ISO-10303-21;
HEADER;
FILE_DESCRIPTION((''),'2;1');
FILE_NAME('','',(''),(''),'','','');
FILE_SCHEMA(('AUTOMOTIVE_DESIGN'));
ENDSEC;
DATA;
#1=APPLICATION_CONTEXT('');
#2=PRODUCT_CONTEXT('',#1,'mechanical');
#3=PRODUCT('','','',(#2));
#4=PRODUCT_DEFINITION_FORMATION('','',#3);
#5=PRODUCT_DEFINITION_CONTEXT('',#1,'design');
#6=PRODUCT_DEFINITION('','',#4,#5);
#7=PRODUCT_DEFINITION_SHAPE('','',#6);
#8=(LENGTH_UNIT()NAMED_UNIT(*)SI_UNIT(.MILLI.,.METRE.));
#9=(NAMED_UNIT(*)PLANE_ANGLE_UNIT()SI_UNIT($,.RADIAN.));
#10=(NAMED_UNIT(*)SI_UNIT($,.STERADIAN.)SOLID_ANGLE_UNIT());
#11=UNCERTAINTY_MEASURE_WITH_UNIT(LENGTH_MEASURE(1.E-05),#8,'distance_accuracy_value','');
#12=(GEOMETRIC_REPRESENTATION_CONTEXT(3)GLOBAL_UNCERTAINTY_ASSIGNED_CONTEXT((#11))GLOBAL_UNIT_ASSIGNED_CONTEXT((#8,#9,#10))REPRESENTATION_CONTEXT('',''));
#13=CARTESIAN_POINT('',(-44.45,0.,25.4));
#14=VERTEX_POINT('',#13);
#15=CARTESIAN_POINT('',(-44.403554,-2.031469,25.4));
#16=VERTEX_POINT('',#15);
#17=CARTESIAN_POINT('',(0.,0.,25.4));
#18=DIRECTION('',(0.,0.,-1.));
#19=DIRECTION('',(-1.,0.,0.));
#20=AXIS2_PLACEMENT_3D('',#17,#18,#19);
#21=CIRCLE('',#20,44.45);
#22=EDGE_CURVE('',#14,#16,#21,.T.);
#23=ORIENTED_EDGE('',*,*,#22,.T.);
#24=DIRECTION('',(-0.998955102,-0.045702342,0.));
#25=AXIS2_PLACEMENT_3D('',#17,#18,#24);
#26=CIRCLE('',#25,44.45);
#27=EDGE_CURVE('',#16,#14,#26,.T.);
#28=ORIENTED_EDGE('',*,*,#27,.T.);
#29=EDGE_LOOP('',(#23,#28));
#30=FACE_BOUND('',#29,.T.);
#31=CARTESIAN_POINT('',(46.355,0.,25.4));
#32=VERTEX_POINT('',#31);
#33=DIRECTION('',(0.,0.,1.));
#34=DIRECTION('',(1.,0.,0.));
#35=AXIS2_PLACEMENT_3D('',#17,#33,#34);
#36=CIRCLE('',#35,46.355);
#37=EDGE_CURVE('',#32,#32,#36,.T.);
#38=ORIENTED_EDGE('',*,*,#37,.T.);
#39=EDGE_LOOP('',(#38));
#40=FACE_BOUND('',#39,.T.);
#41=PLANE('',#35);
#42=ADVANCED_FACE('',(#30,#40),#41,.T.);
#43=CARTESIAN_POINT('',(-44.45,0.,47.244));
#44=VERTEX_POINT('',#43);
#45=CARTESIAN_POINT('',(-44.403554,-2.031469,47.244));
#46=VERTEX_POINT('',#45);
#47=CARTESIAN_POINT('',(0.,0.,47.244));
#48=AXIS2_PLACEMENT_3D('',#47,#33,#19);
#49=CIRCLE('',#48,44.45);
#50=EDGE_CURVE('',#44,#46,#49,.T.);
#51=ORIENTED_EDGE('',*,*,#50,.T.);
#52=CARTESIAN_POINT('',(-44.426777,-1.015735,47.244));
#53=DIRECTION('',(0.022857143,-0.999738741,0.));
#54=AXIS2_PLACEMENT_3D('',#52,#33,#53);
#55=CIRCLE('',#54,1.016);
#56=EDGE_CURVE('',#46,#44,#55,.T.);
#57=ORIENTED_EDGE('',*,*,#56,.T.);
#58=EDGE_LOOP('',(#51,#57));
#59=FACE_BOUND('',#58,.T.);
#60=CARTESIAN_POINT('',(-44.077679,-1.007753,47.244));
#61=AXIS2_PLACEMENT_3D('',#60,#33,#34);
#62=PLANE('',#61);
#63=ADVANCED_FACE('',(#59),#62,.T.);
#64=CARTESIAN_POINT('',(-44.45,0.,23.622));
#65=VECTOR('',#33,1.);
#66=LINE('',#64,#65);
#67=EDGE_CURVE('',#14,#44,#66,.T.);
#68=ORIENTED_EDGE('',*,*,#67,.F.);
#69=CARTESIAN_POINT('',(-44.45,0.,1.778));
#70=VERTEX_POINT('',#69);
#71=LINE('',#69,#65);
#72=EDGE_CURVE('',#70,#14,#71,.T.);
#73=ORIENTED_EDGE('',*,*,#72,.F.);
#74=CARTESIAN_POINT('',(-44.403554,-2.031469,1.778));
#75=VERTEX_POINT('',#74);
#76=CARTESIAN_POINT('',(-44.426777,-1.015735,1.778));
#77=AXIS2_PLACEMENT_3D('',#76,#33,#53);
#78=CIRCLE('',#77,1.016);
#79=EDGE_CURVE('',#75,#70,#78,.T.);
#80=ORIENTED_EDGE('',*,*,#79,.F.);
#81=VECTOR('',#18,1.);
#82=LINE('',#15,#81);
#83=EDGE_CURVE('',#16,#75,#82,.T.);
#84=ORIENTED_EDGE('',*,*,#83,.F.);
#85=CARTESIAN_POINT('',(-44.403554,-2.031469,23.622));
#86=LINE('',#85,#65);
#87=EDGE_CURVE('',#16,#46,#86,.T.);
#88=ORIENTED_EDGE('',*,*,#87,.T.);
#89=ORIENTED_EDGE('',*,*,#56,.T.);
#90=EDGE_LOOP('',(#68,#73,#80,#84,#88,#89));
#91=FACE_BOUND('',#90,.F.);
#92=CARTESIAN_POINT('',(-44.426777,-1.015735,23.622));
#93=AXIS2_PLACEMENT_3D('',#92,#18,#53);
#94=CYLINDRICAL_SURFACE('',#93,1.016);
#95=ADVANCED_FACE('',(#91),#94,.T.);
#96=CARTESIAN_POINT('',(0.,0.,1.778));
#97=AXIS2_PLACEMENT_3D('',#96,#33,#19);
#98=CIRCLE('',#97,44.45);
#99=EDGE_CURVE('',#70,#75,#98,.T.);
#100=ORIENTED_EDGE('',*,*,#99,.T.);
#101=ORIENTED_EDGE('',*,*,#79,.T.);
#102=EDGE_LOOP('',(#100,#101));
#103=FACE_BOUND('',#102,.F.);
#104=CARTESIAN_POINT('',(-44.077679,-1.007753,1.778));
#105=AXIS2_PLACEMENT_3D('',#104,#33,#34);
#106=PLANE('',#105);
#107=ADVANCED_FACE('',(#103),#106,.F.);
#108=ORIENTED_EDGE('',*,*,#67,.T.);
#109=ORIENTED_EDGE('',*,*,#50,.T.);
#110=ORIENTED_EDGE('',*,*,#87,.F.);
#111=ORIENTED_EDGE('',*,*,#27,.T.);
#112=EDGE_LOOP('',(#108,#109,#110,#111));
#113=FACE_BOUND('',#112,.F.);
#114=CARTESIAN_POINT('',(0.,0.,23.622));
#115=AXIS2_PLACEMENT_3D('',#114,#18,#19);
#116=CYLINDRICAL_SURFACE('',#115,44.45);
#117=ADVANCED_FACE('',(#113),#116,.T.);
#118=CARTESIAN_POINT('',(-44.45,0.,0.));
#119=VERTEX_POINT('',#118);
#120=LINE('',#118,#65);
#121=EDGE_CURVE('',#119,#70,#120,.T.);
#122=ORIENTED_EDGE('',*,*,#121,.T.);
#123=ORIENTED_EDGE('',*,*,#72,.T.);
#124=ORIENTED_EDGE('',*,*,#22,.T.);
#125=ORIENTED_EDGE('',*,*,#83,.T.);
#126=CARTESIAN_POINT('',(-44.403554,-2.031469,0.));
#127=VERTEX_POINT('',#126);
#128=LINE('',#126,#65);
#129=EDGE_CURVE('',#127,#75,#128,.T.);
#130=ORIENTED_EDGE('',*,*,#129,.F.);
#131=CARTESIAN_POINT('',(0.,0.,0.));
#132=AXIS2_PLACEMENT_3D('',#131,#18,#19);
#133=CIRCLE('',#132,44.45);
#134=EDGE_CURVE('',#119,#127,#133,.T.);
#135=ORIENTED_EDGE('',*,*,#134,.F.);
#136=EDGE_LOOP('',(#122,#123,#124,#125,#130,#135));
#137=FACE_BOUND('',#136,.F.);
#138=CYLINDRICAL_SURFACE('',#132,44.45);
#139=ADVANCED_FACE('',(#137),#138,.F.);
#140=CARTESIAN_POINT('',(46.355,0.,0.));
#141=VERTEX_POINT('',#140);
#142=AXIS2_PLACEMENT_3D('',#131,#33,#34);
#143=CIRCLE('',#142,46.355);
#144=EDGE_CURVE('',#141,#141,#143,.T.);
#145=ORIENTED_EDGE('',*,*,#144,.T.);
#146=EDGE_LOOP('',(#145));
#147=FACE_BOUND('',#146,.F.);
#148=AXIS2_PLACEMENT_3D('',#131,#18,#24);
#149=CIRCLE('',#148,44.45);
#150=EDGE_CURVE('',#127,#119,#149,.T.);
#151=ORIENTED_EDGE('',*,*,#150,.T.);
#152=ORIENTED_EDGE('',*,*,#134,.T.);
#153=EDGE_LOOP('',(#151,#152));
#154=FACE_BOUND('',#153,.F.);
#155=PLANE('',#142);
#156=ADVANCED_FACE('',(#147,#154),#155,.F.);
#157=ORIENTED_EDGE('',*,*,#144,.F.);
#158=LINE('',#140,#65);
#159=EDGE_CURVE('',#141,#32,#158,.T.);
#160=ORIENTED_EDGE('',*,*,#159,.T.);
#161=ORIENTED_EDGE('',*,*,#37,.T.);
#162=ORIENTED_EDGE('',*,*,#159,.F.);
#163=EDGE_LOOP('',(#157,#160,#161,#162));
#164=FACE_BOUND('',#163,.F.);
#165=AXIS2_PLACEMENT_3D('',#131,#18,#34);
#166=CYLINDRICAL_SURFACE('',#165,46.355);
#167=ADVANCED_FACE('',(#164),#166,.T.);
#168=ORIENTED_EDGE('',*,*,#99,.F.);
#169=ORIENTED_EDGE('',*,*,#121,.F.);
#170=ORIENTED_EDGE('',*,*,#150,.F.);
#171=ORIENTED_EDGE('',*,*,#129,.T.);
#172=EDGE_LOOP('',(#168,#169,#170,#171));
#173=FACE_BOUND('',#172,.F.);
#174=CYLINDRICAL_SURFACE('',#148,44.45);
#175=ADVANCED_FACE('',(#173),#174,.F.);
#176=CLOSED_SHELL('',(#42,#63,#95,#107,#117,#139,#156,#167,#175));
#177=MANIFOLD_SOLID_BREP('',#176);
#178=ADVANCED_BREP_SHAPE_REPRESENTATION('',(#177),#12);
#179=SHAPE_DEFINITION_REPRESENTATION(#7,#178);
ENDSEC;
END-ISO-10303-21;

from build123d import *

# Parameters (mm, degrees)
F0_R          = 46.355
F1_DEPTH      = 25.4
F2_START      = 1.778
F2_DEPTH      = 21.844
F3_DEPTH      = 23.622
F3_DEPTH_BACK = 1.778


with BuildPart() as f1:
    # F0 (on Top) → F1 (new body)
    with BuildSketch(Plane.XY):
        Circle(F0_R)
        with BuildLine():
            ThreePointArc((-44.45, 0), (0, 44.45), (44.45, 0))
            ThreePointArc((44.45, 0), (1.016, -44.4383870544), (-44.4035542857, -2.0314691225))
            ThreePointArc((-44.4035542857, -2.0314691225), (-44.4383870544, -1.016), (-44.45, 0))
        make_face(mode=Mode.SUBTRACT)
    extrude(amount=F1_DEPTH)

    # F0 (on Top) → F2 (join)
    with BuildSketch(Plane.XY.offset(F2_START)):
        with BuildLine():
            ThreePointArc((-44.4035542857, -2.0314691225), (-43.4110425816, -0.9925117041), (-44.45, 0))
            ThreePointArc((-44.45, 0), (-44.4383870544, -1.016), (-44.4035542857, -2.0314691225))
        make_face()
    extrude(amount=F2_DEPTH)

    # F3 (add, two sides): a face of the model
    f3_faces = [f1.faces().sort_by_distance(p)[0] for p in [
        (-43.9998730556, -1.0059742036, 23.622),
    ]]
    extrude(f3_faces, amount=F3_DEPTH)
    extrude(f3_faces, amount=-F3_DEPTH_BACK)


solid = f1.part
